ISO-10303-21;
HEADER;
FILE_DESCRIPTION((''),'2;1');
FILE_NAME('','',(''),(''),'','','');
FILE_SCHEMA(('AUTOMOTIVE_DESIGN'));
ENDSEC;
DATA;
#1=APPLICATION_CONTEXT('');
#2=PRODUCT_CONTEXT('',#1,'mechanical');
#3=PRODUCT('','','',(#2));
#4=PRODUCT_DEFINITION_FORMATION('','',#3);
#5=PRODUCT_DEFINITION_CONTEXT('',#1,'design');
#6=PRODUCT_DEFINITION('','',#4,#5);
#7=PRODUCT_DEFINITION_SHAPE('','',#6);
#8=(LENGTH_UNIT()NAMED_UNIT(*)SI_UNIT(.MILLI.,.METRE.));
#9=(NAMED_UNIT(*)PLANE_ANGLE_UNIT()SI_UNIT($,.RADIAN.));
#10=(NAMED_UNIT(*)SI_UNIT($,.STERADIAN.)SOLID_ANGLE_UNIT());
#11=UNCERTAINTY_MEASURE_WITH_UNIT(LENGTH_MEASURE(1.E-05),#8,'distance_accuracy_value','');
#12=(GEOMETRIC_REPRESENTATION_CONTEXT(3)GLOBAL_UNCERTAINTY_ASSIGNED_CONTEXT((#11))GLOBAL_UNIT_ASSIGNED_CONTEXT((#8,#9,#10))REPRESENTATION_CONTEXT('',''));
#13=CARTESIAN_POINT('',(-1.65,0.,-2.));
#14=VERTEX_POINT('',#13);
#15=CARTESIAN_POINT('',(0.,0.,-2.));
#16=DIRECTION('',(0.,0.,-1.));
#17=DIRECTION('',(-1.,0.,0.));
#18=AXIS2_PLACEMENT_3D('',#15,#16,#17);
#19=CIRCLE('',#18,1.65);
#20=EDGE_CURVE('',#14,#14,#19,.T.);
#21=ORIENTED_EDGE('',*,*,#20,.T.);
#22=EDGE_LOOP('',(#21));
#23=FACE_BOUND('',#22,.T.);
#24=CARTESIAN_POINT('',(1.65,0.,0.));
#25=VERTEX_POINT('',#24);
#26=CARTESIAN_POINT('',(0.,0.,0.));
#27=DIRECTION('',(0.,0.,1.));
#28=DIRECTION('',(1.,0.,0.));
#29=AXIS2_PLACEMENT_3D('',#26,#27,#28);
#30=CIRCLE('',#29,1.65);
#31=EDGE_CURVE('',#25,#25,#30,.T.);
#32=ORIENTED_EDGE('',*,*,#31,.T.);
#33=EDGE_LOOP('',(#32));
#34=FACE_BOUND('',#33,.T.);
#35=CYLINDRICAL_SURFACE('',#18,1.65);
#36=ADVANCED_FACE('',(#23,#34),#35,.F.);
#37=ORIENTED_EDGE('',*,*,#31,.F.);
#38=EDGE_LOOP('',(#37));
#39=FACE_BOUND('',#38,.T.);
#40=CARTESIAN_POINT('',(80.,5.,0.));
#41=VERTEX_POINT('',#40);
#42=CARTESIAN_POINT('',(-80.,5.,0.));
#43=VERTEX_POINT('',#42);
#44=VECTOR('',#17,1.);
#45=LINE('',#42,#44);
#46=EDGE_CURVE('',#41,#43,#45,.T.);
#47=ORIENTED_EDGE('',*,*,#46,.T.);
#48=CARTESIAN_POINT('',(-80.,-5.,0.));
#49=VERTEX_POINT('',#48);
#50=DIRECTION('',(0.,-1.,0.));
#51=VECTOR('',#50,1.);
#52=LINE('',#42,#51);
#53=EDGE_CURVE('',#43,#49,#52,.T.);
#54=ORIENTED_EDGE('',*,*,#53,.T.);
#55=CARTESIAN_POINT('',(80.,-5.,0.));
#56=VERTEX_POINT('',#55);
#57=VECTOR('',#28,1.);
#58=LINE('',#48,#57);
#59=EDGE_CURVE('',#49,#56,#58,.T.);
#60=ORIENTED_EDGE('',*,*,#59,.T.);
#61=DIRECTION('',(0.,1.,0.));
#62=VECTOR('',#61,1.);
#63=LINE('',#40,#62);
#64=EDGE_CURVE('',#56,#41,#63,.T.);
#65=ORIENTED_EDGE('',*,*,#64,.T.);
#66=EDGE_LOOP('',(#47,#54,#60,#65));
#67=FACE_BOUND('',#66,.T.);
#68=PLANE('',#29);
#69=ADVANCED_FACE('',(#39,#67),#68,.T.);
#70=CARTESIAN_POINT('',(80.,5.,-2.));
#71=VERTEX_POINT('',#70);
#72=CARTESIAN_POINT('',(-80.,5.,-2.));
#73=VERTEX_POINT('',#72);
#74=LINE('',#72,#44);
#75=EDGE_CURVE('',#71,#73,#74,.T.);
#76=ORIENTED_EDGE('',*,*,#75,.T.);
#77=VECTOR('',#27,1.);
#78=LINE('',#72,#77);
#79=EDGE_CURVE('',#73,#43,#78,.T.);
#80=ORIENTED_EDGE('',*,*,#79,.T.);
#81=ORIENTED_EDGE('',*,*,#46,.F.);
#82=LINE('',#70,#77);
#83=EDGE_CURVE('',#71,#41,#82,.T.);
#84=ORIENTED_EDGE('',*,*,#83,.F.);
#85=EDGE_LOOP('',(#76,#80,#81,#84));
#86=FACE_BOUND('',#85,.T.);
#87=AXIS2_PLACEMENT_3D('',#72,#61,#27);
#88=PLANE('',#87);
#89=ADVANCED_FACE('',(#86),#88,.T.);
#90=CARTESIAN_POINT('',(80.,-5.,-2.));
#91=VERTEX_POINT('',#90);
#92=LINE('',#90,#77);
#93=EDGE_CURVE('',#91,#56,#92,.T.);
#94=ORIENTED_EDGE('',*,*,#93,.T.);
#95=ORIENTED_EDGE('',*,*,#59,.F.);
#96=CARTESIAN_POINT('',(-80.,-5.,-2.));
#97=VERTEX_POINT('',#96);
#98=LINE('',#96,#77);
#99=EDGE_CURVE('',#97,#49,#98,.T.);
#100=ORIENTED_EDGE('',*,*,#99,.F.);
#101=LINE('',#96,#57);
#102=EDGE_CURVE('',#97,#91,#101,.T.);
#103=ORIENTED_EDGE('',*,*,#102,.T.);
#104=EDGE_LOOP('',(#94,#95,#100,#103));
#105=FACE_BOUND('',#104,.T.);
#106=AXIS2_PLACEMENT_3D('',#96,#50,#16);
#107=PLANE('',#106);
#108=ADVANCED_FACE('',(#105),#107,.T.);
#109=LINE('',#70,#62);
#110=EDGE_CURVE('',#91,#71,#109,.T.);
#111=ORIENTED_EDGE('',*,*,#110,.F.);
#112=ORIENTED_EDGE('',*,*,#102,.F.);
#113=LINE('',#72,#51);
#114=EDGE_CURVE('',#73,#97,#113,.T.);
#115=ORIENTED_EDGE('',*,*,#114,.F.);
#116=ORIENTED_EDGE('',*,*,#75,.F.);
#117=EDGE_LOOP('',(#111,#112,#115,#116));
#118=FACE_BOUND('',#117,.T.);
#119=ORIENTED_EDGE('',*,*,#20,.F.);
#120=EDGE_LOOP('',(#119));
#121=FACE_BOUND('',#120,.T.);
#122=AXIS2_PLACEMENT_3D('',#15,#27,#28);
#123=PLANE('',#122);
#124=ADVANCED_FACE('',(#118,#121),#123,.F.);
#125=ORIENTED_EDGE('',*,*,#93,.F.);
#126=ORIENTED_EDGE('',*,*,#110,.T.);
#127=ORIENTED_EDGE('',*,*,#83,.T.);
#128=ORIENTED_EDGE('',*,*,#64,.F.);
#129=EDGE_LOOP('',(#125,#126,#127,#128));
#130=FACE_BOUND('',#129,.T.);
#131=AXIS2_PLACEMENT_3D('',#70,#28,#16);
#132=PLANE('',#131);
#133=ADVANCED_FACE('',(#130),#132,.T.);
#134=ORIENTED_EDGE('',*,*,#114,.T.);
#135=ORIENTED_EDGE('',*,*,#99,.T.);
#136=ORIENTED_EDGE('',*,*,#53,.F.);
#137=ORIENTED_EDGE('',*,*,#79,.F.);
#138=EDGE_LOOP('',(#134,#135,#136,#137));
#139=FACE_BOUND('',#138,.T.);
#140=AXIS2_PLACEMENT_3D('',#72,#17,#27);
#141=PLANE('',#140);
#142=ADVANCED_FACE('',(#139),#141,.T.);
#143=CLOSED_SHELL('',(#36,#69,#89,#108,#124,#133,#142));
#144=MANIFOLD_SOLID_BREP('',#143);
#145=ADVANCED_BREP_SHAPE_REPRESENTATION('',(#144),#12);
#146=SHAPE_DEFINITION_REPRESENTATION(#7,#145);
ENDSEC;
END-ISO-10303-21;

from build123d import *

# Parameters (mm, degrees)
ESBO_O1_W                                      = 160
ESBO_O1_H                                      = 10
FLANGE_BASE1_DEPTH                             = 2
BROCA_DE_ROSQUEAR_DE_CANO_PARA_TARRAXA_D_D     = 3.3
BROCA_DE_ROSQUEAR_DE_CANO_PARA_TARRAXA_D_DEPTH = 4
BROCA_DE_ROSQUEAR_DE_CANO_PARA_TARRAXA_D_TIP   = 0.991420021


# Sheet-metal steps are written as plain solids
with BuildPart() as part:
    # Esboço1 → Flange-base1 (new body)
    with BuildSketch(Plane.XY):
        Rectangle(ESBO_O1_W, ESBO_O1_H)
    extrude(amount=-FLANGE_BASE1_DEPTH)

    # Broca de rosquear de cano para tarraxa de 1/81
    with Locations(Plane(origin=(0, 0, -2), x_dir=(-1, 0, 0), z_dir=(0, 0, -1))):
        with Locations((0, 0)):
            Hole(BROCA_DE_ROSQUEAR_DE_CANO_PARA_TARRAXA_D_D / 2, depth=BROCA_DE_ROSQUEAR_DE_CANO_PARA_TARRAXA_D_DEPTH)
            with Locations((0, 0, -(BROCA_DE_ROSQUEAR_DE_CANO_PARA_TARRAXA_D_DEPTH + BROCA_DE_ROSQUEAR_DE_CANO_PARA_TARRAXA_D_TIP / 2))):  # 118° drill point
                Cone(0, BROCA_DE_ROSQUEAR_DE_CANO_PARA_TARRAXA_D_D / 2, BROCA_DE_ROSQUEAR_DE_CANO_PARA_TARRAXA_D_TIP, mode=Mode.SUBTRACT)


solid = part.part
